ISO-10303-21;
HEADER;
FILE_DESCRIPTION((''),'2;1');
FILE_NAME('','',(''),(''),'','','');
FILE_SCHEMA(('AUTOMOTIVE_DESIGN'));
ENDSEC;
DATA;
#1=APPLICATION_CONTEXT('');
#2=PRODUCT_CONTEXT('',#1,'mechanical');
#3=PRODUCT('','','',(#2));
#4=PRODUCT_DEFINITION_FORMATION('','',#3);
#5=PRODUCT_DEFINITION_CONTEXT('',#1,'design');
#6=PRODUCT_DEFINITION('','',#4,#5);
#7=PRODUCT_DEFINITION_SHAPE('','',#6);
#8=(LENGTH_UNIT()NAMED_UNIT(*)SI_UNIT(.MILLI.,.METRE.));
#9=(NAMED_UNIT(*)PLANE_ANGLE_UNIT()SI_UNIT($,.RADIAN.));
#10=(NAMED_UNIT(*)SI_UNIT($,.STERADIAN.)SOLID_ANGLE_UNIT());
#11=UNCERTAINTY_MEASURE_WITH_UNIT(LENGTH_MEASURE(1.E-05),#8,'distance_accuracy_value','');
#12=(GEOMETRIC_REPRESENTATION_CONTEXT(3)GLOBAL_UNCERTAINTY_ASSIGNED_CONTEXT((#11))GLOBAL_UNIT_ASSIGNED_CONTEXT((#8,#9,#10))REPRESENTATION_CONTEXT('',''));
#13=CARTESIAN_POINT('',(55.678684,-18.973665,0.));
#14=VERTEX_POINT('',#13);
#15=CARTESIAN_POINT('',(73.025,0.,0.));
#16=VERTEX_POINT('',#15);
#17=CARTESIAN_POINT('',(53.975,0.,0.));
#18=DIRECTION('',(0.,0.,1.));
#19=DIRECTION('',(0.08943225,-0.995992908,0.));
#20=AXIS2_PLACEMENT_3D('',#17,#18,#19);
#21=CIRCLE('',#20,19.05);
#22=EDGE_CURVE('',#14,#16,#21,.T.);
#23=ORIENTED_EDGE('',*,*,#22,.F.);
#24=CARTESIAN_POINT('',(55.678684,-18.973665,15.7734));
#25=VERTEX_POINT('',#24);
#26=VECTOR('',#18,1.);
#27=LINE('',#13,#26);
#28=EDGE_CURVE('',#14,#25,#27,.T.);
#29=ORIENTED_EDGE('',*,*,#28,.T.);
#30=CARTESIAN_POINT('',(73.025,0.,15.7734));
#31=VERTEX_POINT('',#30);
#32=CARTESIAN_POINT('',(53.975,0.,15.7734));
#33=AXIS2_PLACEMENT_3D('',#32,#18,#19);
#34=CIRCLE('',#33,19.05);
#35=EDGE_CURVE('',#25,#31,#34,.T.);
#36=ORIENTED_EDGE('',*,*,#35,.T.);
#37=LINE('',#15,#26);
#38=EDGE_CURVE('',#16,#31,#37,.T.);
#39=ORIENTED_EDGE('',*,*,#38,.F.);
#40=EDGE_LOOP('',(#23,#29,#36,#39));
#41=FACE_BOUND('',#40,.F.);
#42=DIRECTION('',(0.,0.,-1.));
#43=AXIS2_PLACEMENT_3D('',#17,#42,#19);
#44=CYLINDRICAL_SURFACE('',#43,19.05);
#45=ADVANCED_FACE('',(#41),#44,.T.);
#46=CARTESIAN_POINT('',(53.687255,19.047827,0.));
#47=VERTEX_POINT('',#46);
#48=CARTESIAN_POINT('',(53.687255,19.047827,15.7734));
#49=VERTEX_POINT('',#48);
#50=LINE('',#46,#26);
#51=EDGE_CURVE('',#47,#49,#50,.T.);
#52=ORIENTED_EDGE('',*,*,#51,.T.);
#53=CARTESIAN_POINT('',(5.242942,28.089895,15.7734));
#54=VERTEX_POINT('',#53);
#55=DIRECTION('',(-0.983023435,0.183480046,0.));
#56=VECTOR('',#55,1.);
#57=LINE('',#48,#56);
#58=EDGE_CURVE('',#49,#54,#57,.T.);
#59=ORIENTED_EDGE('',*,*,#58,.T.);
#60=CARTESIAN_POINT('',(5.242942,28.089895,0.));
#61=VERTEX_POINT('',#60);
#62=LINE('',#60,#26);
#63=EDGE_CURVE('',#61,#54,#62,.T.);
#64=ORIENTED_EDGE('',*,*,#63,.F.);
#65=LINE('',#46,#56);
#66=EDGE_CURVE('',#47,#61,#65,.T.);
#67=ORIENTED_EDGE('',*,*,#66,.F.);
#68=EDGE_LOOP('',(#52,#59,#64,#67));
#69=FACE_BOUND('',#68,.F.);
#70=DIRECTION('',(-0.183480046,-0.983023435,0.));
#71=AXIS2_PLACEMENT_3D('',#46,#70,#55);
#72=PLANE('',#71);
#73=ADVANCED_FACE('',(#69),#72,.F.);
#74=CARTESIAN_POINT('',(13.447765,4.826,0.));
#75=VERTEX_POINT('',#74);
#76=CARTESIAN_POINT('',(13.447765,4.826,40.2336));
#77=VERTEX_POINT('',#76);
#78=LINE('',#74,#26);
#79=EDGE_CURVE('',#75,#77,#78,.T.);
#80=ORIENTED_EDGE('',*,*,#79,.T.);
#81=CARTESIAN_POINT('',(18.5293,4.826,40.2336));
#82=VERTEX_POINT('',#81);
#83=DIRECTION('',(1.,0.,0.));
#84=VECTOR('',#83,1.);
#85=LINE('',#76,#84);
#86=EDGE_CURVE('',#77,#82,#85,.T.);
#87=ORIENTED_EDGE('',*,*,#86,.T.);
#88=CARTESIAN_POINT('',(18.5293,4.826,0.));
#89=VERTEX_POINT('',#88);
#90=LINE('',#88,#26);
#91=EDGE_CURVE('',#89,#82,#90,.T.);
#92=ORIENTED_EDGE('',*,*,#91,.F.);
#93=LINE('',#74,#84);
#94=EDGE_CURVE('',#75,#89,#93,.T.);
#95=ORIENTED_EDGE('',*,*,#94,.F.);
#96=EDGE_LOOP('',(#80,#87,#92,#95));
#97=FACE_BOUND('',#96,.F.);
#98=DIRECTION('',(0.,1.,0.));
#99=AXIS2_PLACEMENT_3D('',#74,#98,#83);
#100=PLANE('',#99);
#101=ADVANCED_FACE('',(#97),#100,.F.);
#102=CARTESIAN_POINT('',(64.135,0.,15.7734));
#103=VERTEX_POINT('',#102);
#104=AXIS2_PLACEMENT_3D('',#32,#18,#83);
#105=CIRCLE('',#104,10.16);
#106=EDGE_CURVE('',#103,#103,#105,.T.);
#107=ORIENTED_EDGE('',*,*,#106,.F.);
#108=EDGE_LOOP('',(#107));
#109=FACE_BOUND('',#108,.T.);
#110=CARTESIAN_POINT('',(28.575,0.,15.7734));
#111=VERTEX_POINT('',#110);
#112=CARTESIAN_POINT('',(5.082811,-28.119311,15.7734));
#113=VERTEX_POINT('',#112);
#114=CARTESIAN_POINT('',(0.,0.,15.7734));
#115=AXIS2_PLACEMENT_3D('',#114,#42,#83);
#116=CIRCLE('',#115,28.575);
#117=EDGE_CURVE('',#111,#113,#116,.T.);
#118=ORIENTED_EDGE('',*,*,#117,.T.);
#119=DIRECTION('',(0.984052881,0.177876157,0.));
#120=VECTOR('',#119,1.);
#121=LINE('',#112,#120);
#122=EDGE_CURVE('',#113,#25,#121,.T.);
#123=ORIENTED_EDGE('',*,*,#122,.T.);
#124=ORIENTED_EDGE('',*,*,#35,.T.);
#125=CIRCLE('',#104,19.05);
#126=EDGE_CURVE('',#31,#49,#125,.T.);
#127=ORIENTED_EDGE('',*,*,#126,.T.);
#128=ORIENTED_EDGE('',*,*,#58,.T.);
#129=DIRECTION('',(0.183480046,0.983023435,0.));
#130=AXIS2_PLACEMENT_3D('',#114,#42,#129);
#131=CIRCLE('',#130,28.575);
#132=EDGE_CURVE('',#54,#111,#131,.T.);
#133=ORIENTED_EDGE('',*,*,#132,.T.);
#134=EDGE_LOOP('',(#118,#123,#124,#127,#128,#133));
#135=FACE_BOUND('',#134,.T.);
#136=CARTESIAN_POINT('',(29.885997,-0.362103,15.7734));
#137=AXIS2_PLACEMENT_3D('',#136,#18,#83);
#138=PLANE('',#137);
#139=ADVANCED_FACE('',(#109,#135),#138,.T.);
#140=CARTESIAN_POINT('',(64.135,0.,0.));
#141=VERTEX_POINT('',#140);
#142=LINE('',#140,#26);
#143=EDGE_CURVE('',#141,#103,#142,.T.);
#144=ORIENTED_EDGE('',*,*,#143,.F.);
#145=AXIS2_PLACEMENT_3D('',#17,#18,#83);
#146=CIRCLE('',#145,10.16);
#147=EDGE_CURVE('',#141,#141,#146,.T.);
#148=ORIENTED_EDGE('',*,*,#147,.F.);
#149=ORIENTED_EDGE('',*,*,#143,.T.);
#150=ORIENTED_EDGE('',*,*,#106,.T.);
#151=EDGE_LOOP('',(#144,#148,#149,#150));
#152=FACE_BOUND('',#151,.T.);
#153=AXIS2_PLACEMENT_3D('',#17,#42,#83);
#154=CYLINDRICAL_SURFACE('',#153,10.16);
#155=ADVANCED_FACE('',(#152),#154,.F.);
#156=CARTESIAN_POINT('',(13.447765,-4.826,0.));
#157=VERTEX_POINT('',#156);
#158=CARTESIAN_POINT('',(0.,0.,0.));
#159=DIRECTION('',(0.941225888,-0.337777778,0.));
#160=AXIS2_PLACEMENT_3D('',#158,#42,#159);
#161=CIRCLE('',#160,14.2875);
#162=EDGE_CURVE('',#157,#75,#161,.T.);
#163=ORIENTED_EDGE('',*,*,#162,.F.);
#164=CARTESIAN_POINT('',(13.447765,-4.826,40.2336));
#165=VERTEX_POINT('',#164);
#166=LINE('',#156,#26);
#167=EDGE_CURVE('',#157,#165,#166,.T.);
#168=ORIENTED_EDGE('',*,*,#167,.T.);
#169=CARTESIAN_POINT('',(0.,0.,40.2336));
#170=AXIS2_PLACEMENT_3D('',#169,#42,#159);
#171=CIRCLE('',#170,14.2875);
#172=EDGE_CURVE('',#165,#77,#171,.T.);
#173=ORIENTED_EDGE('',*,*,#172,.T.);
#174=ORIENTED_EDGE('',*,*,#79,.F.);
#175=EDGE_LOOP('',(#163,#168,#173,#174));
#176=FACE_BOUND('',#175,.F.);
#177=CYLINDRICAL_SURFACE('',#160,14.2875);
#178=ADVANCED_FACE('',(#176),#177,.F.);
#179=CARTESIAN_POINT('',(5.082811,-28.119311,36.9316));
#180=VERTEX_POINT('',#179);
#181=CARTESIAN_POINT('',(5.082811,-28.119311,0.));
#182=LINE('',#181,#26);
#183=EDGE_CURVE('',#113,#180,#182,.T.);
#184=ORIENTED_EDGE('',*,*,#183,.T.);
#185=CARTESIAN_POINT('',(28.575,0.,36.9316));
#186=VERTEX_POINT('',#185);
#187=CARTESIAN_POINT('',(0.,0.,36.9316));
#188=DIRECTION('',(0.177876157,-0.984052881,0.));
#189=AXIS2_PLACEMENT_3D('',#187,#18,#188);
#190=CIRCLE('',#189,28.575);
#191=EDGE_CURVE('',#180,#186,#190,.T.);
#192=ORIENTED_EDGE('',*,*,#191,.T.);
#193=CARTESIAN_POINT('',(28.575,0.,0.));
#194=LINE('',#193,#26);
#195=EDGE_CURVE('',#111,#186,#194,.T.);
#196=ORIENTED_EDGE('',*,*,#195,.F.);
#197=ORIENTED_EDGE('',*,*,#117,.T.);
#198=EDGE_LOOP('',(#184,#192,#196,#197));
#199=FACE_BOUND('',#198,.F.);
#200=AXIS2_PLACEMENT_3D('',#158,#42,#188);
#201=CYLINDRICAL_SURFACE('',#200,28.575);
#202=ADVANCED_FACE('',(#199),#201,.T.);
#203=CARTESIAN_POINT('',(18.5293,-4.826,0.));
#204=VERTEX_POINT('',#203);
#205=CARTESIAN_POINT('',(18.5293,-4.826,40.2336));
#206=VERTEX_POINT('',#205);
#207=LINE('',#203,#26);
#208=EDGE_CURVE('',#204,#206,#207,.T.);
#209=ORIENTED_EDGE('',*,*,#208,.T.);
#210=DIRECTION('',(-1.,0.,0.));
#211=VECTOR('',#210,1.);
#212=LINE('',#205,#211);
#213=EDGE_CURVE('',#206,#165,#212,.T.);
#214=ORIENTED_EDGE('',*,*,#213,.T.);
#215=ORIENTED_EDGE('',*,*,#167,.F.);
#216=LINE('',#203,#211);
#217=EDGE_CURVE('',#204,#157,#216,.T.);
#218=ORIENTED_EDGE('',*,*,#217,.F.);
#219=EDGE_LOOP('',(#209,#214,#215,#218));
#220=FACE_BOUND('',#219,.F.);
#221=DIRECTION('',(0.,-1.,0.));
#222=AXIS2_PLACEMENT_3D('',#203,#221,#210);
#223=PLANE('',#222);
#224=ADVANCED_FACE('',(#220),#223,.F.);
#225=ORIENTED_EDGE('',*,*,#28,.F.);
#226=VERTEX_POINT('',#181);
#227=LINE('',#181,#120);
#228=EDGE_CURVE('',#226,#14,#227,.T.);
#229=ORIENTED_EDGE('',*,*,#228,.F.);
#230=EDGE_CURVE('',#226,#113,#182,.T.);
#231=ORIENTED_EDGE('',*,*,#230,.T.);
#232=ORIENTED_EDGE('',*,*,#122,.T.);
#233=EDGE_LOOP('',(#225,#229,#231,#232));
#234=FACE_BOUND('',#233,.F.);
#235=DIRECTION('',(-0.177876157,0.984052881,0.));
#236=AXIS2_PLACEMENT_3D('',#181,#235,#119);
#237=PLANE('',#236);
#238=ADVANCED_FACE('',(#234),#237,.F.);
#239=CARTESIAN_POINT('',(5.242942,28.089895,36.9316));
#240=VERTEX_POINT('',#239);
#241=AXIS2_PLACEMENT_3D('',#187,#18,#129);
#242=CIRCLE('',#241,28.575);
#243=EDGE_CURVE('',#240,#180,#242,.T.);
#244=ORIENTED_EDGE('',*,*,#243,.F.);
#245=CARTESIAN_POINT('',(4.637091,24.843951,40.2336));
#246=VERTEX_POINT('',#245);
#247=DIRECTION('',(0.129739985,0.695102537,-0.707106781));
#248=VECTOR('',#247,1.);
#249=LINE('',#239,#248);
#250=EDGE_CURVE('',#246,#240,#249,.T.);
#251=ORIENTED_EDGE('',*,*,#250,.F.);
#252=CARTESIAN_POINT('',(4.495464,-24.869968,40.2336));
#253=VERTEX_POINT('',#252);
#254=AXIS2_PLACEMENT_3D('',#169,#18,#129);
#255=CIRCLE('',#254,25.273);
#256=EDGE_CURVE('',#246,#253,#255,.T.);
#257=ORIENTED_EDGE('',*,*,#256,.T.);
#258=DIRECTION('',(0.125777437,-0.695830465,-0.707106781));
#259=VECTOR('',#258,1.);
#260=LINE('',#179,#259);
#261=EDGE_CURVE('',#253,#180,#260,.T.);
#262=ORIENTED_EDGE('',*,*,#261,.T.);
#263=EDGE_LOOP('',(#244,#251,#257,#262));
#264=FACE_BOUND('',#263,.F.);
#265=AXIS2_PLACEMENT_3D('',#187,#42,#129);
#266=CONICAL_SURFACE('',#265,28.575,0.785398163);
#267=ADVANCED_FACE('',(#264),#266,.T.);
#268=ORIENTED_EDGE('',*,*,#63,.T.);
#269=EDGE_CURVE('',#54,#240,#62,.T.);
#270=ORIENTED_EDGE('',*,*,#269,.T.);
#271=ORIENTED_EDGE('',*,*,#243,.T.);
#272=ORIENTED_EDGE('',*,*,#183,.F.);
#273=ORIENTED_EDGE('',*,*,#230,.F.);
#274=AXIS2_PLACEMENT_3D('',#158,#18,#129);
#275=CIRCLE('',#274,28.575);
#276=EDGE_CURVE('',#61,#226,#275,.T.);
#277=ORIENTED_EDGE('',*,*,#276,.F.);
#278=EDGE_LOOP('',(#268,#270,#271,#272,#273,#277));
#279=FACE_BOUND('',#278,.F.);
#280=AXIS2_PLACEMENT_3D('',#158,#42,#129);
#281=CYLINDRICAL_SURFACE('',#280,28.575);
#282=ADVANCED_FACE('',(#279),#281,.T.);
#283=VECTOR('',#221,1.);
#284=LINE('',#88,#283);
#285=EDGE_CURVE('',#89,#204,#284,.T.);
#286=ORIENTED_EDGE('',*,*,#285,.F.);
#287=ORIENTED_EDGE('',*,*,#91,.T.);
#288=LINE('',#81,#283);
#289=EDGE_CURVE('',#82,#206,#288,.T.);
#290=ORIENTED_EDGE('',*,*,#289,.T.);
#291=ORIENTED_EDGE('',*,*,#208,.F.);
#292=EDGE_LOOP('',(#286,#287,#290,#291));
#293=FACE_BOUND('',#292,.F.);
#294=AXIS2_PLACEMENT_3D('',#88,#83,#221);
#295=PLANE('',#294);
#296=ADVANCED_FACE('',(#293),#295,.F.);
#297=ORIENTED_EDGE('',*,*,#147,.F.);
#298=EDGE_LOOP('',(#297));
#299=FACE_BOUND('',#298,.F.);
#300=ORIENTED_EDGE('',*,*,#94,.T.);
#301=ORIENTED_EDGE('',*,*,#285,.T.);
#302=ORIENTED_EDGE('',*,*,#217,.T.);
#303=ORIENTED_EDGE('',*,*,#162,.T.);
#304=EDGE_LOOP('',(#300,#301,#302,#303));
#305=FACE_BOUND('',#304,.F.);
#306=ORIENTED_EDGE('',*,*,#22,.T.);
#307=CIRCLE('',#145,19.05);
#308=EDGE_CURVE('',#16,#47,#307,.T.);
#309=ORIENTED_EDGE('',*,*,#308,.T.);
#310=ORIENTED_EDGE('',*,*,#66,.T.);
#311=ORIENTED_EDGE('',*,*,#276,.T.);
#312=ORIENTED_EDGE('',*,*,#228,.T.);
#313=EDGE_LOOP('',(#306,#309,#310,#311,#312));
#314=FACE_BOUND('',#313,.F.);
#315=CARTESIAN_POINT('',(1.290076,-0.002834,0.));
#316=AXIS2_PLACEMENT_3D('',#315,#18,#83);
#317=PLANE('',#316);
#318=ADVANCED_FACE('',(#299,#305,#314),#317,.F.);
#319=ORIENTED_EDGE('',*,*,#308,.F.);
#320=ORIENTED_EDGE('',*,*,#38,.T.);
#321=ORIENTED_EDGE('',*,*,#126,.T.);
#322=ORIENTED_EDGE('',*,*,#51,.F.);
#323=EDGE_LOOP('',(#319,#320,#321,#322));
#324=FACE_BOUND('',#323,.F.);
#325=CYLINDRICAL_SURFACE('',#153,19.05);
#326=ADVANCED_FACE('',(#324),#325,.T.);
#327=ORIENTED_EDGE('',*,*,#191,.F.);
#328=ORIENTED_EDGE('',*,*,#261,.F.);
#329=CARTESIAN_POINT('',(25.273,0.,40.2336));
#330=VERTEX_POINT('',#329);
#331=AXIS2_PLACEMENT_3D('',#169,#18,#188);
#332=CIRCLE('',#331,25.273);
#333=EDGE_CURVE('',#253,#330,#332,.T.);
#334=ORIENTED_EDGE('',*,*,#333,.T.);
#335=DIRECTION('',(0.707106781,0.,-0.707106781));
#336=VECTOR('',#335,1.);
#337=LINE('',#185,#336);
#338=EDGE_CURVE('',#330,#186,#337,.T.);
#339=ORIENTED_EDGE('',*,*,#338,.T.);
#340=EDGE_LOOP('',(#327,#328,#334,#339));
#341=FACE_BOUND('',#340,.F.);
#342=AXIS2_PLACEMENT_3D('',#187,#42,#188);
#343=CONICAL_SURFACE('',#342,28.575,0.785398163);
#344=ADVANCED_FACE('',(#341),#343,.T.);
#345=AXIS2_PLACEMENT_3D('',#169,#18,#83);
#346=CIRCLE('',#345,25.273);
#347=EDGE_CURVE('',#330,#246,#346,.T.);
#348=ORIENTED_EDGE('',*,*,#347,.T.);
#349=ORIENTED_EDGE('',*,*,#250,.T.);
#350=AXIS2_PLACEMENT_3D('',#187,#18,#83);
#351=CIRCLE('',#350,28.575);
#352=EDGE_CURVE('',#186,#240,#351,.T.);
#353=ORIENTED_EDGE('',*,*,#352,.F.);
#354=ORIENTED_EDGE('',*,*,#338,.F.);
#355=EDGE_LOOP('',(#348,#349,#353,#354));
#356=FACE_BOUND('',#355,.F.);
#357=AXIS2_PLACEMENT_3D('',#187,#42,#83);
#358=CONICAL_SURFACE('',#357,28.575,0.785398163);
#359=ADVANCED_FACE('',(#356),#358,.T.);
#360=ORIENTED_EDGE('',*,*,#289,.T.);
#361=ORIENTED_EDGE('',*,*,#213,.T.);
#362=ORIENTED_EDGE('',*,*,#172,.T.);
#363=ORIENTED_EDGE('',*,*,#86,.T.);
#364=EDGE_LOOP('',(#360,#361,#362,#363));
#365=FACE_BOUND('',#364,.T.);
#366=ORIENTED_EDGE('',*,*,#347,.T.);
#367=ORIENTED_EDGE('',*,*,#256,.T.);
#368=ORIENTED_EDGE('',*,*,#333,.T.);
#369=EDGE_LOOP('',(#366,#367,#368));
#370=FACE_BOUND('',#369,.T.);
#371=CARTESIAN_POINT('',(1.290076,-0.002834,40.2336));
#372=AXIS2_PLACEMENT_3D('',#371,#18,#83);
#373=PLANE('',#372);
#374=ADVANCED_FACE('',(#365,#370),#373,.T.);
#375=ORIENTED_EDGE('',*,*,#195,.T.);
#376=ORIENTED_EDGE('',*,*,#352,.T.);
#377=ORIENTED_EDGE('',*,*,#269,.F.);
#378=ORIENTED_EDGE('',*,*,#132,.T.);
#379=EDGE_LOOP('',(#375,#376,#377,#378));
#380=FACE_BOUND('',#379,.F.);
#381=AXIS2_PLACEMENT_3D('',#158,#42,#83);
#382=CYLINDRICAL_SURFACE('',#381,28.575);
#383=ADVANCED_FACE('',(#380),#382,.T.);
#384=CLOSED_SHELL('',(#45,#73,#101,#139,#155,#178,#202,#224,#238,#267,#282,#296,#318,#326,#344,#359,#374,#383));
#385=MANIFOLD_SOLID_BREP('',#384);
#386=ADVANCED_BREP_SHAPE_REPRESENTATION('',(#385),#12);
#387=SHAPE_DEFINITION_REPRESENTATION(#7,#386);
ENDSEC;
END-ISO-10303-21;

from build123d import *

# Parameters (mm, degrees)
F0_R     = 10.16
F1_DEPTH = 15.7734
F2_DEPTH = 40.2336
F3_SIZE  = 3.302


# Not quite as in the source:
# - a feature names something its author has since deleted; it is built from what else it names


with BuildPart() as f1:
    # F0 (on Top) → F1 (new body)
    with BuildSketch(Plane.XY):
        with BuildLine():
            ThreePointArc((5.2429423077, 28.0898946413), (21.9812158608, 18.258060529), (28.575, 0))
            ThreePointArc((28.575, 0), (21.9291125509, -18.3206071879), (5.0828111824, -28.1193110777))
            Line((5.0828111824, -28.1193110777), (55.6786843639, -18.9736648961))
            ThreePointArc((55.6786843639, -18.9736648961), (34.9510761924, -0.9964050199), (53.687254757, 19.0478267179))
            Line((53.687254757, 19.0478267179), (5.2429423077, 28.0898946413))
        make_face()
        with BuildLine():
            ThreePointArc((73.025, 0), (67.3432637826, 13.5717361984), (53.687254757, 19.0478267179))
            ThreePointArc((53.687254757, 19.0478267179), (34.9510761924, -0.9964050199), (55.6786843639, -18.9736648961))
            ThreePointArc((55.6786843639, -18.9736648961), (68.0348308513, -12.8539354454), (73.025, 0))
        make_face()
        with Locations((53.975, 0)):
            Circle(F0_R, mode=Mode.SUBTRACT)
    extrude(amount=F1_DEPTH)

    # F0 (on Top) → F2 (join)
    with BuildSketch(Plane.XY):
        with BuildLine():
            ThreePointArc((5.0828111824, -28.1193110777), (21.9291125509, -18.3206071879), (28.575, 0))
            ThreePointArc((28.575, 0), (21.9812158608, 18.258060529), (5.2429423077, 28.0898946413))
            ThreePointArc((5.2429423077, 28.0898946413), (-28.5748840448, 0.0814053193), (5.0828111824, -28.1193110777))
        make_face()
        with BuildLine():
            ThreePointArc((13.4477648793, -4.826), (-14.2875, 0), (13.4477648793, 4.826))
            Line((13.4477648793, 4.826), (18.5293, 4.826))
            Line((18.5293, 4.826), (18.5293, 0))
            Line((18.5293, 0), (18.5293, -4.826))
            Line((18.5293, -4.826), (13.4477648793, -4.826))
        make_face(mode=Mode.SUBTRACT)
    extrude(amount=F2_DEPTH)

    # F3
    f3_edges = [f1.edges().sort_by_distance(p)[0] for p in [
        (-5.082811, 28.119311, 40.2336),
    ]]
    chamfer(f3_edges, length=F3_SIZE)


solid = f1.part
